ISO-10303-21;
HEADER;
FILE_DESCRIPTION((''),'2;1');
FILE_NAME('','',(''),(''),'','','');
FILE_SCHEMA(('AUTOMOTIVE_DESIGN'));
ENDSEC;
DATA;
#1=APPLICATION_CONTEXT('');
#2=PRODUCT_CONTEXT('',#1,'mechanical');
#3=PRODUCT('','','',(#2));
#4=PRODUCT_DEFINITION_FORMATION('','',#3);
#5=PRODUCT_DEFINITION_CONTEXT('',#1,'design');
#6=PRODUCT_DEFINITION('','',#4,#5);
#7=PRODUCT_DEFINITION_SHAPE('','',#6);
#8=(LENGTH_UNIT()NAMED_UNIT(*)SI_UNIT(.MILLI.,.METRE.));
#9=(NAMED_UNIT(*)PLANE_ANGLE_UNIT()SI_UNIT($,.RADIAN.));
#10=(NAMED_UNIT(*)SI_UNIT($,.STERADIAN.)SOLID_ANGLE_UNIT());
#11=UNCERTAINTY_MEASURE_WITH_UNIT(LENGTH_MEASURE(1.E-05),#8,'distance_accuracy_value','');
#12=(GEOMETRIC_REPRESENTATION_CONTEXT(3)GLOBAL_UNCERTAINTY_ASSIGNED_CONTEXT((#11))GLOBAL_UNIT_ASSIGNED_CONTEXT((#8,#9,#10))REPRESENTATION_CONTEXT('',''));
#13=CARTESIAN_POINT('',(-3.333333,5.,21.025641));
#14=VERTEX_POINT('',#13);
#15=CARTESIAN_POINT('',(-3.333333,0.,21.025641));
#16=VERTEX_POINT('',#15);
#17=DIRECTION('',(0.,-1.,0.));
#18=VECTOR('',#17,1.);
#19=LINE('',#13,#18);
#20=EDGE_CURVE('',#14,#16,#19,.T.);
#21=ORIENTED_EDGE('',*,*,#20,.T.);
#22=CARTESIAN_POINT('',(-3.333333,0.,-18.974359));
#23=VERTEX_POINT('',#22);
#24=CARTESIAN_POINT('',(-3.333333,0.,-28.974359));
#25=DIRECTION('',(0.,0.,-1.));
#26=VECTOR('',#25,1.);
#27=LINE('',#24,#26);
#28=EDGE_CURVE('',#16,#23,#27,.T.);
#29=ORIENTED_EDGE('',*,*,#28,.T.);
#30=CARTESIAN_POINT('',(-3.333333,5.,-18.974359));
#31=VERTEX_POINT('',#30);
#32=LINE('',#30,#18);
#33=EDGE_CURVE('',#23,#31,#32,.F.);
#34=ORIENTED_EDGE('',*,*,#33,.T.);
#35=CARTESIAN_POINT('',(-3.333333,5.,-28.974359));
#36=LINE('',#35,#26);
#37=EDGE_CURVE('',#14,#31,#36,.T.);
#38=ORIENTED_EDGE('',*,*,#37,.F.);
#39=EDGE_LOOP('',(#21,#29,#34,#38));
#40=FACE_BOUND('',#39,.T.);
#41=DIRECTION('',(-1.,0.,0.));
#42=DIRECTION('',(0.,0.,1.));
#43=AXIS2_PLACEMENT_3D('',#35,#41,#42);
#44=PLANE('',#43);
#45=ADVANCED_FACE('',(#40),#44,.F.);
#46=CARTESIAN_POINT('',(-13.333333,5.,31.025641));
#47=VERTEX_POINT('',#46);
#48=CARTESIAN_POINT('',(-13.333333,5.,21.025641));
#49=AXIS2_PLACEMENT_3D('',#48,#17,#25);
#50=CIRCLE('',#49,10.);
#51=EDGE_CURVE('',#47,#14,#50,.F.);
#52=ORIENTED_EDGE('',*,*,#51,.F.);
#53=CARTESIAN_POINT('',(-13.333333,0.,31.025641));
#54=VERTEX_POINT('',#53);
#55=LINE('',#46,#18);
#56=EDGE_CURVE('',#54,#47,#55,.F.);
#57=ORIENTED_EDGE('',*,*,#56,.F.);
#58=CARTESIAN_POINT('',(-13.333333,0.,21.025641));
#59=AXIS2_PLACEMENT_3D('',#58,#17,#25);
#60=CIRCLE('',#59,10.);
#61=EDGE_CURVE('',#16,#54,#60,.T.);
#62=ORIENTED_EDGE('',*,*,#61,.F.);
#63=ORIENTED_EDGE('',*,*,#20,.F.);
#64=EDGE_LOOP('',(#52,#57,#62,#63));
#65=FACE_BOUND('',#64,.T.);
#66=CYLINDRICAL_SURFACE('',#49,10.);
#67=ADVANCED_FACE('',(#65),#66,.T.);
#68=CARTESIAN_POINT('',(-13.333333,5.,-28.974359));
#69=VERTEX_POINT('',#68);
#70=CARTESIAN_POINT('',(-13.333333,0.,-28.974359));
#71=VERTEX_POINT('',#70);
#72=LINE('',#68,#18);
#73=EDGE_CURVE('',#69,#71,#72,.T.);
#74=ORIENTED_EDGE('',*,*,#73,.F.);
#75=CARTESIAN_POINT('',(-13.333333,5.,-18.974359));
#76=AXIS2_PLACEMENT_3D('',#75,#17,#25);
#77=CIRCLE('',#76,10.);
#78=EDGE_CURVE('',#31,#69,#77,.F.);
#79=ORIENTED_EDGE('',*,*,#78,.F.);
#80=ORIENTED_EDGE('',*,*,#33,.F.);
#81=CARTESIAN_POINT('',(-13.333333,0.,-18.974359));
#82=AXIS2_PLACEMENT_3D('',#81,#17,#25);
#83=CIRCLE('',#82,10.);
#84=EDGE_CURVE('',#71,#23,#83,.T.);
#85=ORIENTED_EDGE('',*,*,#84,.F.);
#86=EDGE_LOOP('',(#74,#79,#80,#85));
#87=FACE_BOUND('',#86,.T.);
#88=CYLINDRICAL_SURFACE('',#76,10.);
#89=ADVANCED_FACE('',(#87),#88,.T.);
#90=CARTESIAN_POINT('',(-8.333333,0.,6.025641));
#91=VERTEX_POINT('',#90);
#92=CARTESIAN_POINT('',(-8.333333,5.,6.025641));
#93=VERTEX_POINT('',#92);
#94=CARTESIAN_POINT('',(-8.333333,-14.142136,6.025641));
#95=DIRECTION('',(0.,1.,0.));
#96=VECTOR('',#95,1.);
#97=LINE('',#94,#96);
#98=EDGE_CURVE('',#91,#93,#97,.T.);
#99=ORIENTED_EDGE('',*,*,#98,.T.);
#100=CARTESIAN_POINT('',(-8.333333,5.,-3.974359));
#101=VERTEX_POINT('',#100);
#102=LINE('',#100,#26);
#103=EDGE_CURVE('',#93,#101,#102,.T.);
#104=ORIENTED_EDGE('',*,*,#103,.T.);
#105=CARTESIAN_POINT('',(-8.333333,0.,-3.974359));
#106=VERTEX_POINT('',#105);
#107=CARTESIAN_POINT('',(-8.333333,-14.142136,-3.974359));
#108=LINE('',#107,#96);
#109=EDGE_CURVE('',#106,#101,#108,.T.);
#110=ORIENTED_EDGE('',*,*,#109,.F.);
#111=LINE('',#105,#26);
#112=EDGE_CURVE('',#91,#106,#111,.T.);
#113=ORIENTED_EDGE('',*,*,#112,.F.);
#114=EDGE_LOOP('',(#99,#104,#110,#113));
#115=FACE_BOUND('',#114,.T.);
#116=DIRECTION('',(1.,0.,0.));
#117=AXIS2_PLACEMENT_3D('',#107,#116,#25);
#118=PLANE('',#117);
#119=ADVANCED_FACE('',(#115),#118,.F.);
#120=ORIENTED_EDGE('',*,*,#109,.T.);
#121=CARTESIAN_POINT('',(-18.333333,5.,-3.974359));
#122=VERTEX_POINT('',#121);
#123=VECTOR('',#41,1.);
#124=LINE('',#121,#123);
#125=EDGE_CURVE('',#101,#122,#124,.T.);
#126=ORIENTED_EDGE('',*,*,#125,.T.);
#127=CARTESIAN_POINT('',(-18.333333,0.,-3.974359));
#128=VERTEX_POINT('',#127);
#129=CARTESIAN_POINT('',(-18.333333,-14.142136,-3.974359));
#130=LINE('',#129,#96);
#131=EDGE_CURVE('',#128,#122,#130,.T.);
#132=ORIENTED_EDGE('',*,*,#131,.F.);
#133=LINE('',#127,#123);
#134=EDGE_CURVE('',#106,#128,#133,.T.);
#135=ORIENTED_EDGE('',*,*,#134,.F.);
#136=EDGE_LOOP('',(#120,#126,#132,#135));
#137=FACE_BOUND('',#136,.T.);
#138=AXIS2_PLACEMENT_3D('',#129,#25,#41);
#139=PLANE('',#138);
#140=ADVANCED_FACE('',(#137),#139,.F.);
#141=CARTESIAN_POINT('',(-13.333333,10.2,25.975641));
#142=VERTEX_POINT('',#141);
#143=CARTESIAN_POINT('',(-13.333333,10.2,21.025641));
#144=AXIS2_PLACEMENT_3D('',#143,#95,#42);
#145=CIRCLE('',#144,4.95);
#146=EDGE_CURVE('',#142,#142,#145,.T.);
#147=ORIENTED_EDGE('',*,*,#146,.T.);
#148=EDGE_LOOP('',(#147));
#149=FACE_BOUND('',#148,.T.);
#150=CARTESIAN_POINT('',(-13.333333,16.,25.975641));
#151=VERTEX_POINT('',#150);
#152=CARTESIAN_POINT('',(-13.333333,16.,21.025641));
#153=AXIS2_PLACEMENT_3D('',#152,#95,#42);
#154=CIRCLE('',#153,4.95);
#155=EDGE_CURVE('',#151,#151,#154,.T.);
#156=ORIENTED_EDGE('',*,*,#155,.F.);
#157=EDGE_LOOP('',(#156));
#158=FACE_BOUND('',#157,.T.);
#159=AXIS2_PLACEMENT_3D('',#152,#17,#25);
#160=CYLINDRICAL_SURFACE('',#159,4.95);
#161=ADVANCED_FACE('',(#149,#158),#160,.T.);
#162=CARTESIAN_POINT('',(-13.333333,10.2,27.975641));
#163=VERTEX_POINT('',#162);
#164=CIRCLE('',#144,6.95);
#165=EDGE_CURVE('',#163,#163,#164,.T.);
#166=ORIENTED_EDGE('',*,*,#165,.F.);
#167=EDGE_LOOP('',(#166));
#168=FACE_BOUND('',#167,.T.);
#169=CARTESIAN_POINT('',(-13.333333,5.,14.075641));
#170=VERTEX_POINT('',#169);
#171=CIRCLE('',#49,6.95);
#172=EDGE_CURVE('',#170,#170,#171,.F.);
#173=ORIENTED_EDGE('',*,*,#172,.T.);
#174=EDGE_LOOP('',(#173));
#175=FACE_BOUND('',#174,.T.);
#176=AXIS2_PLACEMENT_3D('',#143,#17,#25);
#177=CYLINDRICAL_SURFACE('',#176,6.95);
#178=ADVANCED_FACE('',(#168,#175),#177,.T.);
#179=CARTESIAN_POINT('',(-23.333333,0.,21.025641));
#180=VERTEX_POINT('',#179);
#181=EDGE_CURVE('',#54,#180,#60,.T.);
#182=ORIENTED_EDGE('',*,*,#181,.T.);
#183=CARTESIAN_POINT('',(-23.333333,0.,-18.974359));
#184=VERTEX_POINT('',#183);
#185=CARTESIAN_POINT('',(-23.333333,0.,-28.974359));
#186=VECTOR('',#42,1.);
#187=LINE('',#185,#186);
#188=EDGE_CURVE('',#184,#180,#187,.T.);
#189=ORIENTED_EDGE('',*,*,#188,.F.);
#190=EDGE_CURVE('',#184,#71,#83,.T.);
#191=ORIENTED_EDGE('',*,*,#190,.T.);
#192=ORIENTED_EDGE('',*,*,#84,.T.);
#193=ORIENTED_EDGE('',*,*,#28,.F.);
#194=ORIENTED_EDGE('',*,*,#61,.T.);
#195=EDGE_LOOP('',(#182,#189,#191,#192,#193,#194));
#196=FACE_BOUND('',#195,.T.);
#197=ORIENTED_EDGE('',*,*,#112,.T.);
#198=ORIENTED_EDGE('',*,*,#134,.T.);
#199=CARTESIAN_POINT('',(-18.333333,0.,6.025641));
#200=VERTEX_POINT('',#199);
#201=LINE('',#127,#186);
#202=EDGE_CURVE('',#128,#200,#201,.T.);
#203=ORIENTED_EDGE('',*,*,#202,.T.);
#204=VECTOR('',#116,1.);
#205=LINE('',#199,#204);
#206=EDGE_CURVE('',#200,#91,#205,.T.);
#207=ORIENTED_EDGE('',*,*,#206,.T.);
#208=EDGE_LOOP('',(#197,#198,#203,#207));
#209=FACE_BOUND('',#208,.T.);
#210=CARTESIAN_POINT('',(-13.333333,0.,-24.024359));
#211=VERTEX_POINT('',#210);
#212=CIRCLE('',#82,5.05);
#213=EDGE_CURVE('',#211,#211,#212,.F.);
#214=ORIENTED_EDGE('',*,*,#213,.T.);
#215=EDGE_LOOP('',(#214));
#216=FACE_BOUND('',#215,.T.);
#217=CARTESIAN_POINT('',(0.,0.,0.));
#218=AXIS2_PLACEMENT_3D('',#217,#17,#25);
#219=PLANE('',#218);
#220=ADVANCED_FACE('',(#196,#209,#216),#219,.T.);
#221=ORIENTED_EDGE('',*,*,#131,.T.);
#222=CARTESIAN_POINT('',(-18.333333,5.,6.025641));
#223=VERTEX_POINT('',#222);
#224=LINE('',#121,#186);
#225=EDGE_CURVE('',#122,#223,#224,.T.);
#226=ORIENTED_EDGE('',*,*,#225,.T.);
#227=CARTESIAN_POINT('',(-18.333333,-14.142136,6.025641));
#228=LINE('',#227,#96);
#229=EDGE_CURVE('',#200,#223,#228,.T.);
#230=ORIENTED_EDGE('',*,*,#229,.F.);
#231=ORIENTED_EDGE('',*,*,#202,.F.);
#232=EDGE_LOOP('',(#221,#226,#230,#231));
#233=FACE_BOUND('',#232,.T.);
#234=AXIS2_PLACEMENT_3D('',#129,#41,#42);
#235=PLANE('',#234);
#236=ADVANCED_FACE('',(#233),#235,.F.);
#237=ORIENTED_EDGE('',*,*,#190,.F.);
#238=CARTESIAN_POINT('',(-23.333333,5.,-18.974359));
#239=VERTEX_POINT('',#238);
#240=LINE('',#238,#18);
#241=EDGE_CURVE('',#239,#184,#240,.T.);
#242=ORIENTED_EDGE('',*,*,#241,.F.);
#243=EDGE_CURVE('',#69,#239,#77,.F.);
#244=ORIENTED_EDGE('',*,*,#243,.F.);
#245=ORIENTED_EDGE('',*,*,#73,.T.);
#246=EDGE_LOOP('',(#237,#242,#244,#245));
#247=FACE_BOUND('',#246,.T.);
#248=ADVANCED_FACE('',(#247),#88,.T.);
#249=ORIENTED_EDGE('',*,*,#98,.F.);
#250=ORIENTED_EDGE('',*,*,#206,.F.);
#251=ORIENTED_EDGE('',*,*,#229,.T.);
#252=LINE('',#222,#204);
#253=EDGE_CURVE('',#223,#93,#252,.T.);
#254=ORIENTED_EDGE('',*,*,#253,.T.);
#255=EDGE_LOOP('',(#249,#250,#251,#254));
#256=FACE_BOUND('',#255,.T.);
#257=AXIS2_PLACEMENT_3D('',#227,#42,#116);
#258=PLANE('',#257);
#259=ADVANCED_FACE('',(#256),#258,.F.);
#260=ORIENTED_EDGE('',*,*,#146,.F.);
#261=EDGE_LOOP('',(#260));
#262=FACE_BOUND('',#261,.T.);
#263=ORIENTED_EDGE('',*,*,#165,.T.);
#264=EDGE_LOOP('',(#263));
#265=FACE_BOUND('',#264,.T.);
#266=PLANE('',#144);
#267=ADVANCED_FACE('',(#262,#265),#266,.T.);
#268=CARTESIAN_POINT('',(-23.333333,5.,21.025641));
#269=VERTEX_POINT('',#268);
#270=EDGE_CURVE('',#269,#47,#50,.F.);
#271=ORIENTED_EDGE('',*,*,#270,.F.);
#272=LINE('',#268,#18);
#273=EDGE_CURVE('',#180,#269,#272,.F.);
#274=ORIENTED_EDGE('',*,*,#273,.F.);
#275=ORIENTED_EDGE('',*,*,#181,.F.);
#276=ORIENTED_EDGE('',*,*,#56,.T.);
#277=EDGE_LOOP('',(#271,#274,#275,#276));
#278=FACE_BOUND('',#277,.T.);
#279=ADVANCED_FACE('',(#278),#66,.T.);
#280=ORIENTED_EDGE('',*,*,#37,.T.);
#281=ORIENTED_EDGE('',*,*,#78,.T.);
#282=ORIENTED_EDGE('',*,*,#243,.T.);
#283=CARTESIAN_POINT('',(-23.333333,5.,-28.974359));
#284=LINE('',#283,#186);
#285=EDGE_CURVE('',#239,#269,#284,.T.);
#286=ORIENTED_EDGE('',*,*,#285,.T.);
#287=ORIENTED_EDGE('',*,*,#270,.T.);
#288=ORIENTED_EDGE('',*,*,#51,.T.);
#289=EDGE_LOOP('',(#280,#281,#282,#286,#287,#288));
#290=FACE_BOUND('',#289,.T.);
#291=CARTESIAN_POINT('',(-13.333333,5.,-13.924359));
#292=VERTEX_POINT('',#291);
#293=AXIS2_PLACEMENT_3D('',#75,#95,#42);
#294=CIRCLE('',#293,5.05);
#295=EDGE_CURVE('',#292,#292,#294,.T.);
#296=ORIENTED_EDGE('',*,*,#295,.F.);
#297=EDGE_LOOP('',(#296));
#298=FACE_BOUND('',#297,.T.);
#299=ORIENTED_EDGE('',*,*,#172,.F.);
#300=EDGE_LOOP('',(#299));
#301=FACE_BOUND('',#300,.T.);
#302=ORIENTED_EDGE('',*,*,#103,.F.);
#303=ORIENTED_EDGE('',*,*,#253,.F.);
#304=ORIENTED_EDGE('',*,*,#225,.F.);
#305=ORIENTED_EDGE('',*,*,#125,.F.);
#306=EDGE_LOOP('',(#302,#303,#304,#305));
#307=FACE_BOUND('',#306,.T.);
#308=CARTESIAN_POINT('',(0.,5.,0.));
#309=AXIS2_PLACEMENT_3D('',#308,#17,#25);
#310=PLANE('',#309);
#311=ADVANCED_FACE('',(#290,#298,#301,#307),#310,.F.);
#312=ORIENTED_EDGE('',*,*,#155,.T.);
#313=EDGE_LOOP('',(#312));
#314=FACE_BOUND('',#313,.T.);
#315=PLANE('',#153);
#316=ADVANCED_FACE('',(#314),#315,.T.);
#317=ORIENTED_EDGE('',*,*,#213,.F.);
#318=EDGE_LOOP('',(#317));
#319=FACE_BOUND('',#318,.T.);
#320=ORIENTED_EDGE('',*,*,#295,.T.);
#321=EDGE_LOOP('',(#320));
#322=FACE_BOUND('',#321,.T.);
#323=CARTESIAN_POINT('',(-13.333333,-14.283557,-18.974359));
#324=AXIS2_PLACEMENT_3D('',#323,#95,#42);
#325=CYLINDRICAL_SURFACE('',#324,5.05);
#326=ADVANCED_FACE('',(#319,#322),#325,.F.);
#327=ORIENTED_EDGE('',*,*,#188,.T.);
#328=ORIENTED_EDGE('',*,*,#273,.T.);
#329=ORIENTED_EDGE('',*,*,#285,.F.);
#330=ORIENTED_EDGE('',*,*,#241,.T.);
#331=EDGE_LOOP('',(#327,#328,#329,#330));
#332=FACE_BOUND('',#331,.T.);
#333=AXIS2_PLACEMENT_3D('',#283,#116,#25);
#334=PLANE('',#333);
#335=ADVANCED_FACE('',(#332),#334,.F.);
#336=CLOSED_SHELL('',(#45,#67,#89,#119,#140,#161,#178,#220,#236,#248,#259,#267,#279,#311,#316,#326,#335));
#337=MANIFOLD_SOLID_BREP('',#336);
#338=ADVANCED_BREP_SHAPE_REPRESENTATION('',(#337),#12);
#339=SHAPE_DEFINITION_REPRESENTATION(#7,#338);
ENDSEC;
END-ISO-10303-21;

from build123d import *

# Parameters (mm, degrees)
SKETCH1_W           = 20
SKETCH1_H           = 60
BOSS_EXTRUDE1_DEPTH = 5
FILLET1_R           = 10
SKETCH2_R           = 4.95
BOSS_EXTRUDE2_DEPTH = 11
SKETCH2_4_R         = 5.05
CUT_EXTRUDE1_DEPTH  = 5
SKETCH4_W           = 10
SKETCH4_H           = 10
CUT_EXTRUDE2_DEPTH  = 5
SKETCH5_R           = 6.95
BOSS_EXTRUDE3_DEPTH = 5.2


with BuildPart() as part:
    # Sketch1 → Boss-Extrude1 (new body)
    with BuildSketch(Plane(origin=(0, 0, 0), x_dir=(1, 0, 0), z_dir=(0, 1, 0))):
        with Locations((-13.333333333, -1.025641026)):
            Rectangle(SKETCH1_W, SKETCH1_H)
    extrude(amount=BOSS_EXTRUDE1_DEPTH)

    # Fillet1
    fillet1_edges = [part.edges().sort_by_distance(p)[0] for p in [
        (-23.333333333, 2.5, -28.974358974),
        (-3.333333333, 2.5, -28.974358974),
        (-23.333333333, 2.5, 31.025641026),
        (-3.333333333, 2.5, 31.025641026),
    ]]
    fillet(fillet1_edges, radius=FILLET1_R - 0.0001)  # a hair under: the kernel refuses the full size

    # Sketch2 → Boss-Extrude2 (add)
    with BuildSketch(Plane(origin=(0, 5, 0), x_dir=(1, 0, 0), z_dir=(0, 1, 0))):
        with Locations(Location((-13.333333333, -21.025641026, 0), (0, 0, 90))):
            Circle(SKETCH2_R)
    extrude(amount=BOSS_EXTRUDE2_DEPTH)

    # Sketch2<4> → Cut-Extrude1 (cut)
    with BuildSketch(Plane(origin=(0, 5, 0), x_dir=(1, 0, 0), z_dir=(0, 1, 0))):
        with Locations(Location((-13.333333333, 18.974358974, 0), (0, 0, 270))):
            Circle(SKETCH2_4_R)
    extrude(amount=-CUT_EXTRUDE1_DEPTH, mode=Mode.SUBTRACT)

    # Sketch4 → Cut-Extrude2 (cut)
    with BuildSketch(Plane(origin=(0, 5, 0), x_dir=(1, 0, 0), z_dir=(0, 1, 0))):
        with Locations((-13.333333333, -1.025641026)):
            Rectangle(SKETCH4_W, SKETCH4_H)
    extrude(amount=-CUT_EXTRUDE2_DEPTH, mode=Mode.SUBTRACT)

    # Sketch5 → Boss-Extrude3 (add)
    with BuildSketch(Plane(origin=(0, 5, 0), x_dir=(1, 0, 0), z_dir=(0, 1, 0))):
        with Locations(Location((-13.333333333, -21.025641026, 0), (0, 0, 90))):
            Circle(SKETCH5_R)
    extrude(amount=BOSS_EXTRUDE3_DEPTH)


solid = part.part
